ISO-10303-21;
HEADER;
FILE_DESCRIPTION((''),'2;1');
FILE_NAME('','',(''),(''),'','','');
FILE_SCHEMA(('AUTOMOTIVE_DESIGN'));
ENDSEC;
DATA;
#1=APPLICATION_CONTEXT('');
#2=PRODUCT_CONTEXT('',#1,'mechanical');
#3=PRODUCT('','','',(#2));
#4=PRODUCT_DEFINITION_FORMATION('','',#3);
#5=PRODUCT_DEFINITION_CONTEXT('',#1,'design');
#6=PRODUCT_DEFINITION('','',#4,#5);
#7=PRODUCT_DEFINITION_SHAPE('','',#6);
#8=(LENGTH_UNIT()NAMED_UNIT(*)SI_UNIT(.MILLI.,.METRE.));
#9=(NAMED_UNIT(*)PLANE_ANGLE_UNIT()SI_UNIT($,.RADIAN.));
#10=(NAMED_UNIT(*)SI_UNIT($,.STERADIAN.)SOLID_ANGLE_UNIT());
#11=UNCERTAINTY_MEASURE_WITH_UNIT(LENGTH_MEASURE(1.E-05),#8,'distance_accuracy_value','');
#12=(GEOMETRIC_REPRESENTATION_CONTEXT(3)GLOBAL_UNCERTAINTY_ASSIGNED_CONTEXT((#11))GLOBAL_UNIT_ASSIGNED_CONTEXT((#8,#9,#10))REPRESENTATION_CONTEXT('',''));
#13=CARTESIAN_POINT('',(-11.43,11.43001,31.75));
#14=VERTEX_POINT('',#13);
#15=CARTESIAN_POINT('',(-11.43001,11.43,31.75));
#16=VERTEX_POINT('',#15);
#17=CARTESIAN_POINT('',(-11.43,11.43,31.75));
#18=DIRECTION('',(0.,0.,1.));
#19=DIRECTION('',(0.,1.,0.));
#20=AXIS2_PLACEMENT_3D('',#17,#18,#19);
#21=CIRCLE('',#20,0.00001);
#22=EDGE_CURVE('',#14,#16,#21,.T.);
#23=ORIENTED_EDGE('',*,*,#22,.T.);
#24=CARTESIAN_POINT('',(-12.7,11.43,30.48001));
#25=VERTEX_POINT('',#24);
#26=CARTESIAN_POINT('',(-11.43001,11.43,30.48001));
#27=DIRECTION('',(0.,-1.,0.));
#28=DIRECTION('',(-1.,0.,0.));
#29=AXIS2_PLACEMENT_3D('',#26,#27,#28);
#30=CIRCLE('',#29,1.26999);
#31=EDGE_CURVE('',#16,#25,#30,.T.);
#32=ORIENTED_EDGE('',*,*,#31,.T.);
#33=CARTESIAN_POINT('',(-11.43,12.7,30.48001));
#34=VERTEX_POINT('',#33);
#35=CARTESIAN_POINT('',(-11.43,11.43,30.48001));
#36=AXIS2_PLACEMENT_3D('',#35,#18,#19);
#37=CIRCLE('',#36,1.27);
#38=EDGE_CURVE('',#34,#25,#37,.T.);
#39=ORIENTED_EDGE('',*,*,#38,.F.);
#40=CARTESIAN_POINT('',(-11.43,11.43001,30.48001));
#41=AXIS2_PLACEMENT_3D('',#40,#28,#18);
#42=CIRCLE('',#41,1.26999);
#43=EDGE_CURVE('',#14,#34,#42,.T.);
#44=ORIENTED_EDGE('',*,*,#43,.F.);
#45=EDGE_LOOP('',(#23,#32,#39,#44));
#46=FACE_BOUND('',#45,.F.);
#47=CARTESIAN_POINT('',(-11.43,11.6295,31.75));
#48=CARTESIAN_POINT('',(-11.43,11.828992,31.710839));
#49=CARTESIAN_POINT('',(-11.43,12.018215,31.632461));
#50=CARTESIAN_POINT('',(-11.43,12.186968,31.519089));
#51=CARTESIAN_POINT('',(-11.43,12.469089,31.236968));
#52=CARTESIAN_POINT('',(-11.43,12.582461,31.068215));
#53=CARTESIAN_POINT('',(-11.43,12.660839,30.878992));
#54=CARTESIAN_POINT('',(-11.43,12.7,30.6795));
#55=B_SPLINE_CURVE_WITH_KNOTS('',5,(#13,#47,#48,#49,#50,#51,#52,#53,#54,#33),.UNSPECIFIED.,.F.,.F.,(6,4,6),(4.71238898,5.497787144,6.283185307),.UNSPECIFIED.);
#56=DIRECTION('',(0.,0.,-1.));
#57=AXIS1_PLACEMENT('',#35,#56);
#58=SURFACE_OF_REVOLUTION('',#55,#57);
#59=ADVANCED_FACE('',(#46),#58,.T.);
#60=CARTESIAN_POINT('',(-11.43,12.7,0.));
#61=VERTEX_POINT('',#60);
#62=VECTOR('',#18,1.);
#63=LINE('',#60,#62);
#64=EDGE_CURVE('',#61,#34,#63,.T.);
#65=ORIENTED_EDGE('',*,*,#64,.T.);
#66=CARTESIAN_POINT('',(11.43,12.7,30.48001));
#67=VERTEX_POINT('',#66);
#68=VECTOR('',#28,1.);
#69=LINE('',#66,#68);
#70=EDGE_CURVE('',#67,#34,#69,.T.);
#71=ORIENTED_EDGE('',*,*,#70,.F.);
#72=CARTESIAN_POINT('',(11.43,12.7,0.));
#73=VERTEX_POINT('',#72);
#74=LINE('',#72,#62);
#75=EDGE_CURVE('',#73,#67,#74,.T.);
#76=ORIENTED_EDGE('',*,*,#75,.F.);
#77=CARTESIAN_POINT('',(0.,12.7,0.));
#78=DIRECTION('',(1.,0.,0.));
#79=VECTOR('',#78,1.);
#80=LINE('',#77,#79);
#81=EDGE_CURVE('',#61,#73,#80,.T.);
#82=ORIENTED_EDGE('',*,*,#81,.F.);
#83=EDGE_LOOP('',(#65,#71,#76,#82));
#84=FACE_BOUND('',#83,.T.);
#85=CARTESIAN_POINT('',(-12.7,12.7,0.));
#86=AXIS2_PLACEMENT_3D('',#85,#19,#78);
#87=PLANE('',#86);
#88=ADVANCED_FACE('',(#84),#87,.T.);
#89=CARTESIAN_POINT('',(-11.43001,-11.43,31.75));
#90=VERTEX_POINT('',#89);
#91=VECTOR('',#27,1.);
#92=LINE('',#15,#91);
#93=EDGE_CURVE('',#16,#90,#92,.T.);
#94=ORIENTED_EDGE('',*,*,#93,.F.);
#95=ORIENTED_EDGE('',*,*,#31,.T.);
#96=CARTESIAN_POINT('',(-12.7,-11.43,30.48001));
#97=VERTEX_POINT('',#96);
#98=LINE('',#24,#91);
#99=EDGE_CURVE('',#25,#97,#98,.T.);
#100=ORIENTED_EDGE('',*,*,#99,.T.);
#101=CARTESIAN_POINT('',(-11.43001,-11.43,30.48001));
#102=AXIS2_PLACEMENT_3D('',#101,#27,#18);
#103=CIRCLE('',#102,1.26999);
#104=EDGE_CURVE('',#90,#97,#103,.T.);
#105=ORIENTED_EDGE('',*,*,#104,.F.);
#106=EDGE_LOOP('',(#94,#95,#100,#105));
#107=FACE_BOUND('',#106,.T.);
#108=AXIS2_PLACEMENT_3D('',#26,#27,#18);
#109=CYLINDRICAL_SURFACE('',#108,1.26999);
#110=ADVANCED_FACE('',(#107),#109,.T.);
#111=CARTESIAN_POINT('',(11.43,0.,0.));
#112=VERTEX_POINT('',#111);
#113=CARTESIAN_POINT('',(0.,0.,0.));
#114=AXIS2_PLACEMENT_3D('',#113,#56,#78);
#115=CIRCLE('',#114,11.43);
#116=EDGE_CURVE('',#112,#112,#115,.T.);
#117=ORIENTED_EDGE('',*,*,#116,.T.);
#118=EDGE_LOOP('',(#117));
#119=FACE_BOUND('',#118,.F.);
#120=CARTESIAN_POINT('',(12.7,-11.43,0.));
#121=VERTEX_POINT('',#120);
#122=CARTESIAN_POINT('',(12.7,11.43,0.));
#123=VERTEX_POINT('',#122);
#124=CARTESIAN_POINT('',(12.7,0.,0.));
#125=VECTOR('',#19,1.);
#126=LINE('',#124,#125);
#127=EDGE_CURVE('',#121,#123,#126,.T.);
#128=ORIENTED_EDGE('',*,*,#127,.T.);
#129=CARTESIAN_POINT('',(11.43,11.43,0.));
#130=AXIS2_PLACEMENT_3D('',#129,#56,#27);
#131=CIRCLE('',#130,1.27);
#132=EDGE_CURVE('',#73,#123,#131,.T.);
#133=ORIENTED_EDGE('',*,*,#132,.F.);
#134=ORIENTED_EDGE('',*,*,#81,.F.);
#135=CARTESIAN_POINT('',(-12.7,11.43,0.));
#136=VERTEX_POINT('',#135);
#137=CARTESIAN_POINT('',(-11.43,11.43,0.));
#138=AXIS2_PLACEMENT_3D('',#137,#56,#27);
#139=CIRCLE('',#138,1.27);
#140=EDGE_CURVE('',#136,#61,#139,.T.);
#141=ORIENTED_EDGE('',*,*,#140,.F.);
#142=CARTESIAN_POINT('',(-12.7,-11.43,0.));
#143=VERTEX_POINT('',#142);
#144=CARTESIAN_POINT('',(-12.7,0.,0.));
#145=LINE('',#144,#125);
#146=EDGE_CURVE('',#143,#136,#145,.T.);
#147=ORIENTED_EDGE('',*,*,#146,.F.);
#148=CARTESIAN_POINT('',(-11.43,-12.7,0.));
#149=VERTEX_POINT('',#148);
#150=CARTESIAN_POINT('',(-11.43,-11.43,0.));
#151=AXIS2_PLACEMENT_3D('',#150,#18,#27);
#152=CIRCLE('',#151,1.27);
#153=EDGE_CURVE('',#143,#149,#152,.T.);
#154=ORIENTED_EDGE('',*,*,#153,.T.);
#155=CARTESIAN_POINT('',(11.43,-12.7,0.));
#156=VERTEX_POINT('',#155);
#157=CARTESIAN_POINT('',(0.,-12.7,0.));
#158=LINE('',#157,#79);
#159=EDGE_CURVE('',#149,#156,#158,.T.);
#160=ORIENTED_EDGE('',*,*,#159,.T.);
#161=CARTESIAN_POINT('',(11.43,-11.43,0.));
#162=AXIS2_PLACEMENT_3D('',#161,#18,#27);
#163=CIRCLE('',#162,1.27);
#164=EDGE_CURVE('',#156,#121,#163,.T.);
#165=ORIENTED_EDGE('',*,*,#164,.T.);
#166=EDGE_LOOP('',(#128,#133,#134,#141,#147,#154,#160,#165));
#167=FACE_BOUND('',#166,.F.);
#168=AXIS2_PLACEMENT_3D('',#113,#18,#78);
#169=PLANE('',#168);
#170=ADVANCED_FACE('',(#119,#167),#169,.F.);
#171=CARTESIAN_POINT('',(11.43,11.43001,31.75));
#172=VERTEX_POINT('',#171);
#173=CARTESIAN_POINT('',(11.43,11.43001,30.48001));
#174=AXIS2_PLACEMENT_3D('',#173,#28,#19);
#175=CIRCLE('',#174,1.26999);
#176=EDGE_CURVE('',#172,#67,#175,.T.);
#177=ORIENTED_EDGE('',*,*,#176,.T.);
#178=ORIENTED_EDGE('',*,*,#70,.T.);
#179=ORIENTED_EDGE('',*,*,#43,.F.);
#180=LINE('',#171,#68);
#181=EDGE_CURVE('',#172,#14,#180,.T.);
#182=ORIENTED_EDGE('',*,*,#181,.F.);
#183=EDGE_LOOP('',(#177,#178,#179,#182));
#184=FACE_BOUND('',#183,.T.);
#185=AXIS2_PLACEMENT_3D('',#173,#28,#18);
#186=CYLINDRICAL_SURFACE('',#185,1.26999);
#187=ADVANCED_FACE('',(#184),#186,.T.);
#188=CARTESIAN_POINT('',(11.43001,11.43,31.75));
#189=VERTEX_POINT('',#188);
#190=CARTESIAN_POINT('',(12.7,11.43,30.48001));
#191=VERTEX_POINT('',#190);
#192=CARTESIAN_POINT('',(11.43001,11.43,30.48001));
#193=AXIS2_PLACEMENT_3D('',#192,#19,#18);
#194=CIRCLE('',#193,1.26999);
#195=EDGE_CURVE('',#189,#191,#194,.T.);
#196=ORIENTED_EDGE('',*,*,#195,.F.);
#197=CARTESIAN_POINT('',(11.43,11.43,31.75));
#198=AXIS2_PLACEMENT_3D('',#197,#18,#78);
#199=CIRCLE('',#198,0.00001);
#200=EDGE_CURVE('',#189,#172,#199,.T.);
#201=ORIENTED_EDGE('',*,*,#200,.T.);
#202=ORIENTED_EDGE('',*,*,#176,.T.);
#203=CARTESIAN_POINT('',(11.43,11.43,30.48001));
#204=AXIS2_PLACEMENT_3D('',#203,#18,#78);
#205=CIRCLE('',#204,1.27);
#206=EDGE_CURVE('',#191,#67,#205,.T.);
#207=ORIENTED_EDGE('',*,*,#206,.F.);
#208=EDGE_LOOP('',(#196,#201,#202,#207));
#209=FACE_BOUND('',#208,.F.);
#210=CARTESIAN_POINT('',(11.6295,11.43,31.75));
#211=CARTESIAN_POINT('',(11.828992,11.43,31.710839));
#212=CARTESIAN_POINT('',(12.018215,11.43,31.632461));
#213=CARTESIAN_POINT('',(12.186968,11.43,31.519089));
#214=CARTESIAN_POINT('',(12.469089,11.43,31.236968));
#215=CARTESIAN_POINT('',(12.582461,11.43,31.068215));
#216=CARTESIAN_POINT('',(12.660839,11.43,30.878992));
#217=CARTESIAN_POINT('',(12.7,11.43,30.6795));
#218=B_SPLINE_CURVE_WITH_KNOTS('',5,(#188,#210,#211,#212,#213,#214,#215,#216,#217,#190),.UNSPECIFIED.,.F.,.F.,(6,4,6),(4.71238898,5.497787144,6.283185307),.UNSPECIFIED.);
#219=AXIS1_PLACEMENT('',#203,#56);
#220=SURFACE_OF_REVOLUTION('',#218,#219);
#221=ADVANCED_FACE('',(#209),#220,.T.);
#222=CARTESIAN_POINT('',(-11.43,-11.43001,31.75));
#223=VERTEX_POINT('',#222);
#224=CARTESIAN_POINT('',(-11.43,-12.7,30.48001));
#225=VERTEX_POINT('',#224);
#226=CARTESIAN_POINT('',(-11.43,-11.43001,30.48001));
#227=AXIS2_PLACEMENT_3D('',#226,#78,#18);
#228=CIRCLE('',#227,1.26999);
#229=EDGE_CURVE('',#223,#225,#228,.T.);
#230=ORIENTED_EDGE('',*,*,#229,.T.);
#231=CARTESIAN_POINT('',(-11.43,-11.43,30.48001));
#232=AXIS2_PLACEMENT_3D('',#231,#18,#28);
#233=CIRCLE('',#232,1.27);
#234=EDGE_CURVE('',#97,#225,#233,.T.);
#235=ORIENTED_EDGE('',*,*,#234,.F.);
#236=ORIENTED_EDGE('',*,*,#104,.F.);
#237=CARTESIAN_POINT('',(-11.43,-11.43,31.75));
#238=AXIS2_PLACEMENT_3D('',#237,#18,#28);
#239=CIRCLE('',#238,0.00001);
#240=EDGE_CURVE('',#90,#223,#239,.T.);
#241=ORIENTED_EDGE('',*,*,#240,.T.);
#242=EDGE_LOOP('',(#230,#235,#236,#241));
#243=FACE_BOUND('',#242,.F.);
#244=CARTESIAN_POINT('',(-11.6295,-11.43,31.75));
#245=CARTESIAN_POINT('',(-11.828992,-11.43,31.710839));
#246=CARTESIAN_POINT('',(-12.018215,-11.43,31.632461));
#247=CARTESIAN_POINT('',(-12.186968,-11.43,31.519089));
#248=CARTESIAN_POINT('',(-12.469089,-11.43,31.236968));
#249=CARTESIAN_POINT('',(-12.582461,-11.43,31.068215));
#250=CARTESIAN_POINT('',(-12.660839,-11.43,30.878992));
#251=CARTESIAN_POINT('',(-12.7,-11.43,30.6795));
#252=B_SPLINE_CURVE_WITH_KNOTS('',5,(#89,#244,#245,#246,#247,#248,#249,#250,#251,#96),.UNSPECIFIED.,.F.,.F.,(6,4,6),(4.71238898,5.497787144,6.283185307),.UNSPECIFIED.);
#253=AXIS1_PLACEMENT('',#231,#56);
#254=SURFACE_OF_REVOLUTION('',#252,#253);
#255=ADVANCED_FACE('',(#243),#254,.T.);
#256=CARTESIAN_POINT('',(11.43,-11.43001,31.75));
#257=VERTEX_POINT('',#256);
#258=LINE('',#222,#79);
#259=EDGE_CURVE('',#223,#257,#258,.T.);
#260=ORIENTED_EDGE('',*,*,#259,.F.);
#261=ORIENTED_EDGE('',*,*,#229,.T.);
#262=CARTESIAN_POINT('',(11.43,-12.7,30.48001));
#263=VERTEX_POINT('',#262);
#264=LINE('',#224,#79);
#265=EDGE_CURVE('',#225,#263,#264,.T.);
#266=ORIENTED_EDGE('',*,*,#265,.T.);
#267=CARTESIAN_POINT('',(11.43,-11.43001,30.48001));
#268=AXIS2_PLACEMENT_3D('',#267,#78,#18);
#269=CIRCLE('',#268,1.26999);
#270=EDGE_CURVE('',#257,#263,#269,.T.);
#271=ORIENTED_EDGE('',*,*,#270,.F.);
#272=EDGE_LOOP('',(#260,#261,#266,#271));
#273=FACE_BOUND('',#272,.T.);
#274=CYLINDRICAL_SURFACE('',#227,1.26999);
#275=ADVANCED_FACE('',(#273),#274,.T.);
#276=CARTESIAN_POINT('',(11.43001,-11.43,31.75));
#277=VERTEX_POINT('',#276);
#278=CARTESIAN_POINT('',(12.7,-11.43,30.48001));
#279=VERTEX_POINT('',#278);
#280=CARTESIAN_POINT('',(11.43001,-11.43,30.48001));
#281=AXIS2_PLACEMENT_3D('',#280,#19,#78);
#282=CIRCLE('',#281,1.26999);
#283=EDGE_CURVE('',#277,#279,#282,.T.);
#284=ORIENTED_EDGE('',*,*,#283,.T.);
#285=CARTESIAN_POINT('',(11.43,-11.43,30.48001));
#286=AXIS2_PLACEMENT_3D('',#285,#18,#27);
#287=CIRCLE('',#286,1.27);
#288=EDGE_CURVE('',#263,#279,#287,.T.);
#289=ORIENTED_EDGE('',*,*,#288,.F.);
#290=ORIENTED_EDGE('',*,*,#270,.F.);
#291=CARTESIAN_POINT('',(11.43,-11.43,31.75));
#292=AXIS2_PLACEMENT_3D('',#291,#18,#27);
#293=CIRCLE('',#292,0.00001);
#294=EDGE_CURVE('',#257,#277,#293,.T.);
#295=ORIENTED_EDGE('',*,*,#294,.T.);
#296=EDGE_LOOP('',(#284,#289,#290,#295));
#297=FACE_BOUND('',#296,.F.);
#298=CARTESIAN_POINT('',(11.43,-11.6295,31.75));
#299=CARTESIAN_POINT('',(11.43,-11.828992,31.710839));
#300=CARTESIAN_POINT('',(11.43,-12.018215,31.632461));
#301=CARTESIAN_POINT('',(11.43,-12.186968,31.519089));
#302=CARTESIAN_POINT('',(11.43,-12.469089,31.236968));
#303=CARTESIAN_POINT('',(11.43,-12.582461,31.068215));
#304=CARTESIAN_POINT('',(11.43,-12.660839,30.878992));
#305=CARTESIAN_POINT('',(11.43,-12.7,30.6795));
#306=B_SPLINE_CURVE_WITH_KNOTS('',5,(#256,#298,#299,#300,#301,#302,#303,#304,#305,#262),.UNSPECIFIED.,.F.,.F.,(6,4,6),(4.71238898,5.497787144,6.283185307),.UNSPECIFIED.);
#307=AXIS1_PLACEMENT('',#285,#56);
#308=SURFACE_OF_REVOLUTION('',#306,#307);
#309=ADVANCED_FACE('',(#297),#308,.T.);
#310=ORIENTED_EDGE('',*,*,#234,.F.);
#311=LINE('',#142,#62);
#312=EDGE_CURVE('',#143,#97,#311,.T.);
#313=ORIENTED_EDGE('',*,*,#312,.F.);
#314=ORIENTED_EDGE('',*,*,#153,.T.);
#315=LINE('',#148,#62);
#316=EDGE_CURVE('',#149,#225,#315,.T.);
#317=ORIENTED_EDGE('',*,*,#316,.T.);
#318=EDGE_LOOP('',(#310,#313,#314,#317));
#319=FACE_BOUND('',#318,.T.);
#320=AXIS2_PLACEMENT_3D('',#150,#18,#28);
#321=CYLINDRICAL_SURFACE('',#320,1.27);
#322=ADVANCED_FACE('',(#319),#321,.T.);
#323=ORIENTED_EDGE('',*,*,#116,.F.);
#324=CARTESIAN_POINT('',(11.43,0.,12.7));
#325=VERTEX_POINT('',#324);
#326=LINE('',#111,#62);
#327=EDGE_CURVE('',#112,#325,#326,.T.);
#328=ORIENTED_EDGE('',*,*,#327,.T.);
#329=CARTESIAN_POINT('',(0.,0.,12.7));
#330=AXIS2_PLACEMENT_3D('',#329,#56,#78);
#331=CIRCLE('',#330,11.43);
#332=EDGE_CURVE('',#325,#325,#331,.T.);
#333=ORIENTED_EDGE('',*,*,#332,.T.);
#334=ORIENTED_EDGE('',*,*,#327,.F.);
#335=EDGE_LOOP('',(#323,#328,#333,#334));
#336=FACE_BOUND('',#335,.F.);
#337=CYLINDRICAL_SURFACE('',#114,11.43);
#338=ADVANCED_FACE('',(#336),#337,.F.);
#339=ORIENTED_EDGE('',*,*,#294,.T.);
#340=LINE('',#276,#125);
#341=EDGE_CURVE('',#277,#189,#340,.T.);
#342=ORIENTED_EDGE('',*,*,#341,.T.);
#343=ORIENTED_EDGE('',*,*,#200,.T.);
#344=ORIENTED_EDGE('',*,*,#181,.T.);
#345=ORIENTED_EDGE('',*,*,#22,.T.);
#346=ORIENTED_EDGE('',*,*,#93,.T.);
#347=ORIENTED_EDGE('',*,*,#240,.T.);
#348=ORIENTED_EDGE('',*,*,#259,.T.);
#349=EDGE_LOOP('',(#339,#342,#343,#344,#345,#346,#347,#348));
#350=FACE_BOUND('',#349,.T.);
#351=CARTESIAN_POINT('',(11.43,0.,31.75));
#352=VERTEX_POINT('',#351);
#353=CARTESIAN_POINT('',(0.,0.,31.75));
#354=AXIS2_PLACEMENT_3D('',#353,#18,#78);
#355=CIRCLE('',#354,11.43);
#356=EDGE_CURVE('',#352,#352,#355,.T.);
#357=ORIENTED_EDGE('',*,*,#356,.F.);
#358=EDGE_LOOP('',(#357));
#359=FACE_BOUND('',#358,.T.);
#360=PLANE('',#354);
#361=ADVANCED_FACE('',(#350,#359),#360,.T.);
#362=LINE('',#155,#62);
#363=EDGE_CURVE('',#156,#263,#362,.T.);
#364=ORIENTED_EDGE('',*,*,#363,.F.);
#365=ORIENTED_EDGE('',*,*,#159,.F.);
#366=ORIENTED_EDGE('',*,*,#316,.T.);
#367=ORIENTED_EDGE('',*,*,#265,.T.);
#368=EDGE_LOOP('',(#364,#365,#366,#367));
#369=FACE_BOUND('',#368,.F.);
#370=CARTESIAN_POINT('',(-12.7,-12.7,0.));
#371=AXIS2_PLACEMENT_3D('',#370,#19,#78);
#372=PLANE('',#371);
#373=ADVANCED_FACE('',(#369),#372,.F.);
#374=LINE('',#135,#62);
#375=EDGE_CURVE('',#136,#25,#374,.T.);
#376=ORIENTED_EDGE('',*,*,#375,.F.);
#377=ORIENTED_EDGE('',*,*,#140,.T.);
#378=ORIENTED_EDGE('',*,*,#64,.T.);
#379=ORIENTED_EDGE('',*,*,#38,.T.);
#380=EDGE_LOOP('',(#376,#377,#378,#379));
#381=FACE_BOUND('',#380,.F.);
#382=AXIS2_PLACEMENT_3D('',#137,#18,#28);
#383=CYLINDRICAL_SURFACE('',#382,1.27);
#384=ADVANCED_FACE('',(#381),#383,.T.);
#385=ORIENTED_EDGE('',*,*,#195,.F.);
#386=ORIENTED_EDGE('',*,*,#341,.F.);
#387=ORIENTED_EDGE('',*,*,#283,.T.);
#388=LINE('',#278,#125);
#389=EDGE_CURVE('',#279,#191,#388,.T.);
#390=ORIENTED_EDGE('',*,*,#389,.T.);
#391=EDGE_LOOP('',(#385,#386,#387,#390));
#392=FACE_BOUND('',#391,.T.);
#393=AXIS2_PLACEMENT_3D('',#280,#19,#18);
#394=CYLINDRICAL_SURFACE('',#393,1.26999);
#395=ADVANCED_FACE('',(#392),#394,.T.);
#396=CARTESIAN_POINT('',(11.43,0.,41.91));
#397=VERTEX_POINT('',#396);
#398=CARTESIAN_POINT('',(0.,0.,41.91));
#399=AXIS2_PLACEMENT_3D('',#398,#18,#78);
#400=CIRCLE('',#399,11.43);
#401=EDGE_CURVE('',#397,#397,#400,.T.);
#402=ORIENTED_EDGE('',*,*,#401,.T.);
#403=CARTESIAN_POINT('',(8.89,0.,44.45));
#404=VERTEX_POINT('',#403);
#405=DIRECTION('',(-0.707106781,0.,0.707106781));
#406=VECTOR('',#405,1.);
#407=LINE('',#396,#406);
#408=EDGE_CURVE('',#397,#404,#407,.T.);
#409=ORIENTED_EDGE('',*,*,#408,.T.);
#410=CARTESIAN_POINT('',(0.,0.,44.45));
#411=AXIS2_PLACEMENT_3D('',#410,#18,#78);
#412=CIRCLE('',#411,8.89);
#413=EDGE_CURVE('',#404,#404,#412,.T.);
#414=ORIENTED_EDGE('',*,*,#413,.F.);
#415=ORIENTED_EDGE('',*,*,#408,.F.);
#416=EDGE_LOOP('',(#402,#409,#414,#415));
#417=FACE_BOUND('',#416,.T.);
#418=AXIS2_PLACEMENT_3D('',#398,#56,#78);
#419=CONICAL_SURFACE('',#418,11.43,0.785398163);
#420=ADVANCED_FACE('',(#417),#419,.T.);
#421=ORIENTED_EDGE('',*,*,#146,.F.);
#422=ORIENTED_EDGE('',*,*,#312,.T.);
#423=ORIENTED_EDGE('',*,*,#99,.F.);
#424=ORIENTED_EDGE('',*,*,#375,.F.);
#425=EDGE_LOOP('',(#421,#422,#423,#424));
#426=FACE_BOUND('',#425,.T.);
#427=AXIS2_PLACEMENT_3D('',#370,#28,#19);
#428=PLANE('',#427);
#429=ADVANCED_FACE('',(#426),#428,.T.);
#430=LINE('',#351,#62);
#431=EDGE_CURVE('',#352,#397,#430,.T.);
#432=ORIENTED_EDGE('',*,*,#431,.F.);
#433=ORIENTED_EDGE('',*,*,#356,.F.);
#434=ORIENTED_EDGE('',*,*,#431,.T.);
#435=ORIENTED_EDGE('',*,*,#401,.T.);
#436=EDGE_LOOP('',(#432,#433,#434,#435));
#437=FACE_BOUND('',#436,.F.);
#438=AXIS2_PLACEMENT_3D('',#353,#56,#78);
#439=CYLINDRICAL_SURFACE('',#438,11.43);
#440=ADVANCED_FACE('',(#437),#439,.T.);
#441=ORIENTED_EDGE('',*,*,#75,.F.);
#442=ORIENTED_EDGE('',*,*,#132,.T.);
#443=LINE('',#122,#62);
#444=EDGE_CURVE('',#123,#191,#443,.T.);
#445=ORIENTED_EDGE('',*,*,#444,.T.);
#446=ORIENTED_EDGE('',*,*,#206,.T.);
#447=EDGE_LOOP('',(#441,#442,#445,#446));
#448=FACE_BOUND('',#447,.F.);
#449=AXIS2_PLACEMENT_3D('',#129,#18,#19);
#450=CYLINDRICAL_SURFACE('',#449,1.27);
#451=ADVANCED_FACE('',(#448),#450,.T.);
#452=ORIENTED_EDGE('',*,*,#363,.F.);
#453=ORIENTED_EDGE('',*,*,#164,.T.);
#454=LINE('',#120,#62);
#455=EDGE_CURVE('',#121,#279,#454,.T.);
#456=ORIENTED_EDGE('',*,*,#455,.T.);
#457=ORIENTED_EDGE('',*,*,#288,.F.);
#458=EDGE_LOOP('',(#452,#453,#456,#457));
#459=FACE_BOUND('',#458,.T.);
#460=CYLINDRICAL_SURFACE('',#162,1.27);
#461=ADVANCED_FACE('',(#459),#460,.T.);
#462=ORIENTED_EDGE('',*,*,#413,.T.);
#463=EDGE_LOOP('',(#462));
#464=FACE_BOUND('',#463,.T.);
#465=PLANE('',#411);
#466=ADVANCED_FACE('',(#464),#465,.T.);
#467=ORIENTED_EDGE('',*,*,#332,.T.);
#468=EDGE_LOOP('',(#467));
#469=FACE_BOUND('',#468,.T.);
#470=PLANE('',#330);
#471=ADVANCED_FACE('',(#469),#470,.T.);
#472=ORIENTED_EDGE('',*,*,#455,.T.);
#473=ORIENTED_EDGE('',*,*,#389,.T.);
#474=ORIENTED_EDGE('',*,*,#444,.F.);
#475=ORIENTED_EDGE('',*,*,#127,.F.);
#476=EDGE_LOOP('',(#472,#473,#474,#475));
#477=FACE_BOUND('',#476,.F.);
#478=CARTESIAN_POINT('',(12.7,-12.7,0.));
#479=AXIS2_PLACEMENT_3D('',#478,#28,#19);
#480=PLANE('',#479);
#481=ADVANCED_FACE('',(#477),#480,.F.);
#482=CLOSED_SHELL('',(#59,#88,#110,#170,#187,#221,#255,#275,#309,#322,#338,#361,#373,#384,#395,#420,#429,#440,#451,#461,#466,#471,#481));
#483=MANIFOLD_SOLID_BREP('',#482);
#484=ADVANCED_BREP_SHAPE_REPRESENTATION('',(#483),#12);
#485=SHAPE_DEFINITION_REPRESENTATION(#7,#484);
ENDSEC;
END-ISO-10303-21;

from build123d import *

# Parameters (mm, degrees)
F0_W     = 25.4
F0_H     = 25.4
F1_DEPTH = 31.75
F2_R     = 11.43
F3_DEPTH = 12.7
F4_SIZE  = 2.54
F5_R     = 1.27
F6_R     = 1.26999
F7_R     = 11.43
F8_DEPTH = 12.7


# Not quite as in the source:
# - a fillet or chamfer is up to 0.001 mm smaller than in the source, because OpenCascade refuses the exact size


with BuildPart() as f1:
    # F0 (on Top) → F1 (new body)
    with BuildSketch(Plane.XY):
        Rectangle(F0_W, F0_H)
    extrude(amount=F1_DEPTH)

    # F2 (on face) → F3 (join)
    with BuildSketch(Plane.XY.offset(31.75)):
        Circle(F2_R)
    extrude(amount=F3_DEPTH)

    # F4
    f4_edges = [f1.edges().sort_by_distance(p)[0] for p in [
        (-11.43, 0, 44.45),
    ]]
    chamfer(f4_edges, length=F4_SIZE)

    # F5
    f5_edges = [f1.edges().sort_by_distance(p)[0] for p in [
        (-12.7, -12.7, 15.875),
        (12.7, -12.7, 15.875),
        (-12.7, 12.7, 15.875),
        (12.7, 12.7, 15.875),
    ]]
    fillet(f5_edges, radius=F5_R)

    # F6 (radius 1.27 in the source; OpenCascade refuses exactly that, so slightly less here)
    f6_edges = [f1.edges().sort_by_distance(p)[0] for p in [
        (0, -12.7, 31.75),
        (12.7, 0, 31.75),
        (0, 12.7, 31.75),
        (-12.7, 0, 31.75),
    ]]
    fillet(f6_edges, radius=F6_R)

    # F7 (on face) → F8 (cut)
    with BuildSketch(Plane(origin=(0, 0, 0), x_dir=(1, 0, 0), z_dir=(0, 0, -1))):
        Circle(F7_R)
    extrude(amount=-F8_DEPTH, mode=Mode.SUBTRACT)


solid = f1.part
